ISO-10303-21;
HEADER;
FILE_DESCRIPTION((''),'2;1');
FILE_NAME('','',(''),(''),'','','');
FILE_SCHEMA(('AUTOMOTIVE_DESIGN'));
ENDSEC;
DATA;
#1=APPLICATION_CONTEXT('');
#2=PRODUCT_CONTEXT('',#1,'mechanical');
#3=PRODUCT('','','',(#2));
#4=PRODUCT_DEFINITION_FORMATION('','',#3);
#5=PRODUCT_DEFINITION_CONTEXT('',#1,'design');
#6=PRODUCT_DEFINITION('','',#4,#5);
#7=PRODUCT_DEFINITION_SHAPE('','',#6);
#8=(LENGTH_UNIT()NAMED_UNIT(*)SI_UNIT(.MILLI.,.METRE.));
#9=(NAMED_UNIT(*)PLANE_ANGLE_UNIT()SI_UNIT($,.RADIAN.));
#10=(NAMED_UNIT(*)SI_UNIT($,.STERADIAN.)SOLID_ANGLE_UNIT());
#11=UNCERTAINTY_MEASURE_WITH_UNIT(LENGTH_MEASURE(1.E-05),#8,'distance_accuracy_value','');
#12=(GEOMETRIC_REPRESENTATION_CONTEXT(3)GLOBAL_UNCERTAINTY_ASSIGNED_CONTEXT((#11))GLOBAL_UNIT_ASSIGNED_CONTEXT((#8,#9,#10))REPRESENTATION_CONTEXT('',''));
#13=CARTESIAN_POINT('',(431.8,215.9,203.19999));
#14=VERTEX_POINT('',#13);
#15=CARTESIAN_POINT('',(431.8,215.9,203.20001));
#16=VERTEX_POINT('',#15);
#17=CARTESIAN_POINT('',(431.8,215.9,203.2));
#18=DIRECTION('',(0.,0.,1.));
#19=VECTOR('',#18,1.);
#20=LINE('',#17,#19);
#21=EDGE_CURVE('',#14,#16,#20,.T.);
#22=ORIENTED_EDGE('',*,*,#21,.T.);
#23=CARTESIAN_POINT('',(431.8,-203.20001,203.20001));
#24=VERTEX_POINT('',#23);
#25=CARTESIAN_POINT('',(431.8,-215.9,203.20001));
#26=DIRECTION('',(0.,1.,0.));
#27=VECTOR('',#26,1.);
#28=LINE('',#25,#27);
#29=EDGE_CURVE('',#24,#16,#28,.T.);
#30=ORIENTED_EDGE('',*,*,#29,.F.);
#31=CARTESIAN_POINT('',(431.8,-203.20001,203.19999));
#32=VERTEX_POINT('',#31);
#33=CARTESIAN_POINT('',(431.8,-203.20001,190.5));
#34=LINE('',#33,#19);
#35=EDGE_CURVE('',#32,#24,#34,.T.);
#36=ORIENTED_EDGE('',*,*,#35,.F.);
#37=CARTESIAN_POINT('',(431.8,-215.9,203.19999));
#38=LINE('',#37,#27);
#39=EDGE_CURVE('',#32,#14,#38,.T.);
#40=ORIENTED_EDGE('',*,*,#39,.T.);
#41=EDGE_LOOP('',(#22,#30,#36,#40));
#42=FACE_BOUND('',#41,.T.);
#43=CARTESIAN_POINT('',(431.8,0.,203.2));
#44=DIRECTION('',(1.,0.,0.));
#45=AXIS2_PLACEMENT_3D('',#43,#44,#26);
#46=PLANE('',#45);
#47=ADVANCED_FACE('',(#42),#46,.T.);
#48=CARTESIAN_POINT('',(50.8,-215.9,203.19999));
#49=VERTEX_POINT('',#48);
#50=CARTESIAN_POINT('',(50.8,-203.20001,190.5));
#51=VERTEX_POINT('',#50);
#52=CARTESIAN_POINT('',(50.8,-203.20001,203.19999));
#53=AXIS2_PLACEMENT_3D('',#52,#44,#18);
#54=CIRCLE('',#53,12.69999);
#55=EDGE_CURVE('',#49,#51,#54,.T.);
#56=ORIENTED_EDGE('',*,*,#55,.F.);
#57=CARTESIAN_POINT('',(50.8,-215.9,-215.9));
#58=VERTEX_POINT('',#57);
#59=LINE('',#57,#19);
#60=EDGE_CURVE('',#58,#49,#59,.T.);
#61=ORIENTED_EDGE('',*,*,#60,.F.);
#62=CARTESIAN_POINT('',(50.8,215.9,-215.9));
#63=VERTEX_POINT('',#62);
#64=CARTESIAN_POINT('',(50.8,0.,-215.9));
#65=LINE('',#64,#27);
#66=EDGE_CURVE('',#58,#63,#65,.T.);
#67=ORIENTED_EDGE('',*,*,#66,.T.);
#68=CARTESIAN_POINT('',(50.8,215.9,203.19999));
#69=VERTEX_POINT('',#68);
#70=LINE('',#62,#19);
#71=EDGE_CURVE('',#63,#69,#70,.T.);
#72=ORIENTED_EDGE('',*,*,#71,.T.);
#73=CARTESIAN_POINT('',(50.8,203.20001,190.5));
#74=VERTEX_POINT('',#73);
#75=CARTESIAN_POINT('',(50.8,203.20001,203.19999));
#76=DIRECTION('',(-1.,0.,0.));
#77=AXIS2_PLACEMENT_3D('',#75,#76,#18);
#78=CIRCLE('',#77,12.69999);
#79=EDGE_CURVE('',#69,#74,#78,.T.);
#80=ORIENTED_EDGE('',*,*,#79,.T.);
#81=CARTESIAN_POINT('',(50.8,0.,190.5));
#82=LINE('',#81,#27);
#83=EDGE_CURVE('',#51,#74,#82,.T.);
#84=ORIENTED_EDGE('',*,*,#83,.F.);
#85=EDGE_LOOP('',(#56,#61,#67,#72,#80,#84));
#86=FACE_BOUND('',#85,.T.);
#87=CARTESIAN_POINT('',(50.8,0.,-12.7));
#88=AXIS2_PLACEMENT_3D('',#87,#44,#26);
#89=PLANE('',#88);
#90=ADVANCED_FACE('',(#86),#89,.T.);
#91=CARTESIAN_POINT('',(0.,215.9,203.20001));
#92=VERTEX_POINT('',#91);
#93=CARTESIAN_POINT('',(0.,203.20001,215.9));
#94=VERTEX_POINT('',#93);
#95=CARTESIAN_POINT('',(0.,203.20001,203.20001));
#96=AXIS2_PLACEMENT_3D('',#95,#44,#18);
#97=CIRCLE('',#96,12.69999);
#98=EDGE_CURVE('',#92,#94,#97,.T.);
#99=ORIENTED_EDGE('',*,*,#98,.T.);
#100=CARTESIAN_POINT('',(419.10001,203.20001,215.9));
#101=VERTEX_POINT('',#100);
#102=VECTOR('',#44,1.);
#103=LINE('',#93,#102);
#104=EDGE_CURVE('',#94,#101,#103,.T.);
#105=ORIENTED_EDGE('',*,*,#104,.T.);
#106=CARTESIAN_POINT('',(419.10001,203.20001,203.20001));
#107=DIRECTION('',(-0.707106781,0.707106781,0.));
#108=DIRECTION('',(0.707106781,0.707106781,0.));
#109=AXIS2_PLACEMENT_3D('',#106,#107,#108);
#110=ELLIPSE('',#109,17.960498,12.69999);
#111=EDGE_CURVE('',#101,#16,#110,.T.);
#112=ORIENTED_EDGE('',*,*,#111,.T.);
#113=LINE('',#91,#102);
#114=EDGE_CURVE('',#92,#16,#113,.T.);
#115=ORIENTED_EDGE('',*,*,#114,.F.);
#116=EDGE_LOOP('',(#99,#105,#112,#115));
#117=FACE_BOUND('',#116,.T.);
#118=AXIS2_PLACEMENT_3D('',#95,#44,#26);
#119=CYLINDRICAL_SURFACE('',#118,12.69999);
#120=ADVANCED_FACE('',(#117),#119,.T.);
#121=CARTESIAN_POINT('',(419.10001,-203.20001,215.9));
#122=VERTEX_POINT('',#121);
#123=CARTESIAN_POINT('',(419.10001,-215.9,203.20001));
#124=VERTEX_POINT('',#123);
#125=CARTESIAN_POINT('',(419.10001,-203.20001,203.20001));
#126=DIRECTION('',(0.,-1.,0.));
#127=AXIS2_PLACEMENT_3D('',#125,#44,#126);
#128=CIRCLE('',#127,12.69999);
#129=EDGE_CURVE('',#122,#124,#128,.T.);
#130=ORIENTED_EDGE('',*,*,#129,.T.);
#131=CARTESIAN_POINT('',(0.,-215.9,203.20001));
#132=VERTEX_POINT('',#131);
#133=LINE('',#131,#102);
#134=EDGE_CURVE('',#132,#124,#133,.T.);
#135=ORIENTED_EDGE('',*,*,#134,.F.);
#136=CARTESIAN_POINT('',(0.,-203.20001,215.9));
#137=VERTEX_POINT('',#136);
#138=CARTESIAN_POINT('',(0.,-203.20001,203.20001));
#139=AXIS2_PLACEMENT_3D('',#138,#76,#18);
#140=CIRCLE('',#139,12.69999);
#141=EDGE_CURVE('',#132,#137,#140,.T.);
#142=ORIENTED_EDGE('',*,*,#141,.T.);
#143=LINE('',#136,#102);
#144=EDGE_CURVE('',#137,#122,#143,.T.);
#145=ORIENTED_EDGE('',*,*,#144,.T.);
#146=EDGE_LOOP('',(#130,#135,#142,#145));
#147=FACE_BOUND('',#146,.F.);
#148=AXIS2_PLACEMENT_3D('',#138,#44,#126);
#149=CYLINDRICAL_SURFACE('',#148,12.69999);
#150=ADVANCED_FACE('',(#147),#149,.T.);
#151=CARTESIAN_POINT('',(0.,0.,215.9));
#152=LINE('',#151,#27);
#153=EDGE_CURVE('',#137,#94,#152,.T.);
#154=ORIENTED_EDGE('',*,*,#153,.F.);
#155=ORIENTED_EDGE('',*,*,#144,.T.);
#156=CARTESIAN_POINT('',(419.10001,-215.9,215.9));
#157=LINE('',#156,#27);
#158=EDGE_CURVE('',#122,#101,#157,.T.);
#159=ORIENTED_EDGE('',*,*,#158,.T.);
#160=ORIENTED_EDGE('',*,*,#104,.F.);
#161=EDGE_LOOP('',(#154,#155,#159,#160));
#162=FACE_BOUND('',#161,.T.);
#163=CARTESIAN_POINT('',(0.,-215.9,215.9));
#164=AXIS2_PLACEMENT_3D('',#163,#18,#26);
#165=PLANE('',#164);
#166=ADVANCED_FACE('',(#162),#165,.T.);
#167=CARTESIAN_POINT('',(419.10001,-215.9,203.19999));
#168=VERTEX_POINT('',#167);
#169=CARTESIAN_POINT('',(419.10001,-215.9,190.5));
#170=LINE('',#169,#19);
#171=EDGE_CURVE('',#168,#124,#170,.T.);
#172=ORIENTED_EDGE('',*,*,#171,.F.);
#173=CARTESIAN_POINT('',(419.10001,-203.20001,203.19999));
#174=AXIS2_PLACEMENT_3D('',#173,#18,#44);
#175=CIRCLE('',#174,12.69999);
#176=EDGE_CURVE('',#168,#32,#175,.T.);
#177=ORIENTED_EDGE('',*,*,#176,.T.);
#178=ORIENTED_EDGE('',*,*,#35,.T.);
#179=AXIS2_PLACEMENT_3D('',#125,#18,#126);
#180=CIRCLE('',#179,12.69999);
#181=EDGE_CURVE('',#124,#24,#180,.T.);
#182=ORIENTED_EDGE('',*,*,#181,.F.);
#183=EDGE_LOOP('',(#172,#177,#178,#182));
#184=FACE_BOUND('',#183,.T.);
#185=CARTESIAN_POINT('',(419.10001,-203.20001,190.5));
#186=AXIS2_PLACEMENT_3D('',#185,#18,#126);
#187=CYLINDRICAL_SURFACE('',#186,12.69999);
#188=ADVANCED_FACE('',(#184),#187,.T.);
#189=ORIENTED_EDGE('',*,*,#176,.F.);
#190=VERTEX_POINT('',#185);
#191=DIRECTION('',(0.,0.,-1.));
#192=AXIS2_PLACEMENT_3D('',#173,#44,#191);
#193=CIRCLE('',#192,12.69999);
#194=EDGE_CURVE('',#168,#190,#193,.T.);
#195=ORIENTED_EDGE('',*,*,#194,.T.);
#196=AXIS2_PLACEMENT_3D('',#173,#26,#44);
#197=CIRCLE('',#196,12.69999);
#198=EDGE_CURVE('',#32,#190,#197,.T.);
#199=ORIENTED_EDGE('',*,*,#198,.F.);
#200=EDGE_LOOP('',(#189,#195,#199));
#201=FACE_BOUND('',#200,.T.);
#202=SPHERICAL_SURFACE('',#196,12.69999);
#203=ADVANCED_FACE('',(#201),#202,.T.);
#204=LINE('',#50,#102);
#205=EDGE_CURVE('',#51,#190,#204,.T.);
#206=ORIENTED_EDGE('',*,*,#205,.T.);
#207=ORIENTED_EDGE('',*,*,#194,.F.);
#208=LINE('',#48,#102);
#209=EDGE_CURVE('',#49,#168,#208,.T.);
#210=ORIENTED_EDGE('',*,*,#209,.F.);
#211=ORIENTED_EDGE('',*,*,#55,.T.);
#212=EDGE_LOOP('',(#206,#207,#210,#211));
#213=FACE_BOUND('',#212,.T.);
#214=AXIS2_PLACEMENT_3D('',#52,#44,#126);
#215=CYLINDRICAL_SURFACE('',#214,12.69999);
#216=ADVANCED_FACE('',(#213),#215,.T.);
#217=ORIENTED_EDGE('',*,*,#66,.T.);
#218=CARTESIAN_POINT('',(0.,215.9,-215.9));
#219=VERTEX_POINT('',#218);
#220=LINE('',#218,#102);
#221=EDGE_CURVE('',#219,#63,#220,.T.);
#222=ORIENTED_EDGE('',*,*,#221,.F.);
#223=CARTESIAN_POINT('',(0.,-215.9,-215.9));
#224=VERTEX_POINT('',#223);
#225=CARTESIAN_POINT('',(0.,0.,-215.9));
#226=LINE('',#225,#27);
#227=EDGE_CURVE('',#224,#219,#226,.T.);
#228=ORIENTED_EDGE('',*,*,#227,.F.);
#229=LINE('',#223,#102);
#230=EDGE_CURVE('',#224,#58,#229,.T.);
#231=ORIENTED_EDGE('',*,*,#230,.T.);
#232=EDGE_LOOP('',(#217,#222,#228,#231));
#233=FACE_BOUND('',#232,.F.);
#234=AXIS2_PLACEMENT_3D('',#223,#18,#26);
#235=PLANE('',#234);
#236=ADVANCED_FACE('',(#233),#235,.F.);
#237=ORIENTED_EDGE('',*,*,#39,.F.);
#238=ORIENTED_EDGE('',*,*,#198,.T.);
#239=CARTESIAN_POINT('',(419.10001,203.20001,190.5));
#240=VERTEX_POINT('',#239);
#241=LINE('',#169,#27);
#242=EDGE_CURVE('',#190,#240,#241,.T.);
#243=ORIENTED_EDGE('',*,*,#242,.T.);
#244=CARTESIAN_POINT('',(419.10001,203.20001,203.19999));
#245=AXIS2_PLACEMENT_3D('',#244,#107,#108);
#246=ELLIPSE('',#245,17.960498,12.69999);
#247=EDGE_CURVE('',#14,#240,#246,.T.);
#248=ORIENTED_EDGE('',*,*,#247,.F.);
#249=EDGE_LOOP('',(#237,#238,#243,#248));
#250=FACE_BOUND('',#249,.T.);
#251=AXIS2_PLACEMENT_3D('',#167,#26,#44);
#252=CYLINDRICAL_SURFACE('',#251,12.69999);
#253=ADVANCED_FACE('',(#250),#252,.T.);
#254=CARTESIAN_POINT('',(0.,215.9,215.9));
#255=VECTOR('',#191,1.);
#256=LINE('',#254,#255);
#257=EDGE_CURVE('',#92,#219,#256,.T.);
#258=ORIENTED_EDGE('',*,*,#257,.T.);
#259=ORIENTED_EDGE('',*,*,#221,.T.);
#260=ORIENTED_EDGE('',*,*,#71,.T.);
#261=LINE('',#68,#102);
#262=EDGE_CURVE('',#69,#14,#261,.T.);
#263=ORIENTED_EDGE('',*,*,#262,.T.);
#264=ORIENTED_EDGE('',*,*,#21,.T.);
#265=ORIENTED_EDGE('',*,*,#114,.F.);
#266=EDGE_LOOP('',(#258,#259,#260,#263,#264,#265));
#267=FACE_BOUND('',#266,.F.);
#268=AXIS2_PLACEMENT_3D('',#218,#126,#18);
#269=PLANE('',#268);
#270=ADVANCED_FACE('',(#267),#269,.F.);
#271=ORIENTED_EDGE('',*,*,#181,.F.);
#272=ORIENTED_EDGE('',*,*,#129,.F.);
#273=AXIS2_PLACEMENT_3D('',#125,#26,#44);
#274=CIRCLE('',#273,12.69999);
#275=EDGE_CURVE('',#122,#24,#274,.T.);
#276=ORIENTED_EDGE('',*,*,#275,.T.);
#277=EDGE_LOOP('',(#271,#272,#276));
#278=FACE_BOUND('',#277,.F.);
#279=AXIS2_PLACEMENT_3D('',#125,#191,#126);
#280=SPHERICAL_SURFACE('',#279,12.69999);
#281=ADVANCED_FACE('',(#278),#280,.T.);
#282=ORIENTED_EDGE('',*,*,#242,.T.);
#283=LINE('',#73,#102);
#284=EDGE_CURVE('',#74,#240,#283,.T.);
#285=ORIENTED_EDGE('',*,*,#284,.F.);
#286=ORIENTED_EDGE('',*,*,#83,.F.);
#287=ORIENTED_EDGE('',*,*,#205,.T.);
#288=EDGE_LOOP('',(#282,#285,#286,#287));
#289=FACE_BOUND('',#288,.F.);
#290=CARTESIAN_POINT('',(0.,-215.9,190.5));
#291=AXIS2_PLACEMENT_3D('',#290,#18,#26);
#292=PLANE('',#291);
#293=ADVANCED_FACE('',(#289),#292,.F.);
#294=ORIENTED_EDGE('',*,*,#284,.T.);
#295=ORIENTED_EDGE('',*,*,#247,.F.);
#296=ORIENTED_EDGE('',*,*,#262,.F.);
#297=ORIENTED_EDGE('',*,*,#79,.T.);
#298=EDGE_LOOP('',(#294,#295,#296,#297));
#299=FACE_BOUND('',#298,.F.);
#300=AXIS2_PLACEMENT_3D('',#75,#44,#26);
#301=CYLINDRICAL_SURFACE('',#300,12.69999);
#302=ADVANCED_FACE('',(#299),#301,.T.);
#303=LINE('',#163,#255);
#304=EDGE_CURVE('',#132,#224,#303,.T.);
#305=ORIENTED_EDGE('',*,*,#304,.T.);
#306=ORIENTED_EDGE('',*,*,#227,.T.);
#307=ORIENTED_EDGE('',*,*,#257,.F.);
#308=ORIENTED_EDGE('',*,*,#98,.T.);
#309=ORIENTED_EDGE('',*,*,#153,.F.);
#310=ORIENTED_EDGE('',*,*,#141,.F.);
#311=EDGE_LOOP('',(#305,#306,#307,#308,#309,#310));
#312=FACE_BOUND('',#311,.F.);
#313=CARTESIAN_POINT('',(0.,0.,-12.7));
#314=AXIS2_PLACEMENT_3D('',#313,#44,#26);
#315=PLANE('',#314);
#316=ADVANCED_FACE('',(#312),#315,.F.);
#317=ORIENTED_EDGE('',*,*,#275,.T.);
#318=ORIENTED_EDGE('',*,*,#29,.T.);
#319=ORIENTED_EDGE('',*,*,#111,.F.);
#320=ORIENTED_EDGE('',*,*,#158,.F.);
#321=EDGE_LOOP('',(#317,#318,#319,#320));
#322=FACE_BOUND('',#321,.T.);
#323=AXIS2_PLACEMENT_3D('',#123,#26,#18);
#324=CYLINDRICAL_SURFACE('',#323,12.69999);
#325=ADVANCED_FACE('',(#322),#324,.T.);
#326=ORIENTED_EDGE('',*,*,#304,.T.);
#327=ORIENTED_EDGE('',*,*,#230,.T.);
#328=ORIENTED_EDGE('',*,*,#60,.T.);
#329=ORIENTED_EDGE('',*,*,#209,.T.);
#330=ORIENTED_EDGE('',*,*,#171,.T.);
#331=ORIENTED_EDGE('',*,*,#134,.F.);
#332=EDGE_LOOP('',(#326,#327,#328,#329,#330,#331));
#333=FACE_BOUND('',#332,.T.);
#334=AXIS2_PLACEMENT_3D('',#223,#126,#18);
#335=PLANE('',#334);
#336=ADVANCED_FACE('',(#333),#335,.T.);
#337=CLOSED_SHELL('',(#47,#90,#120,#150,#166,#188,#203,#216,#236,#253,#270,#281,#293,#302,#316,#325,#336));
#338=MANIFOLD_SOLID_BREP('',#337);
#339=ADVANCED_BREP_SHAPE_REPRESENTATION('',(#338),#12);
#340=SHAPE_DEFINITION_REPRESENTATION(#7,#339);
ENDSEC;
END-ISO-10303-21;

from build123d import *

# Parameters (mm, degrees)
F0_W     = 431.8
F0_H     = 25.4
F1_DEPTH = 431.8
F0_H_2   = 406.4
F2_DEPTH = 50.8
F3_R     = 12.69999


# Not quite as in the source:
# - a fillet or chamfer is up to 0.001 mm smaller than in the source, because OpenCascade refuses the exact size


with BuildPart() as f1:
    # F0 (on Right) → F1 (new body)
    with BuildSketch(Plane.YZ):
        with Locations((0, 203.2)):
            Rectangle(F0_W, F0_H)
    extrude(amount=F1_DEPTH)

    # F0 (on Right) → F2 (join)
    with BuildSketch(Plane.YZ):
        with Locations((0, -12.7)):
            Rectangle(F0_W, F0_H_2)
    extrude(amount=F2_DEPTH)

    # F3 (radius 12.7 in the source; OpenCascade refuses exactly that, so slightly less here)
    f3_edges = [f1.edges().sort_by_distance(p)[0] for p in [
        (431.8, 0, 190.5),
        (431.8, -215.9, 203.2),
        (241.3, -215.9, 190.5),
        (215.9, -215.9, 215.9),
        (431.8, 0, 215.9),
        (215.9, 215.9, 215.9),
        (241.3, 215.9, 190.5),
    ]]
    fillet(f3_edges, radius=F3_R)


solid = f1.part
